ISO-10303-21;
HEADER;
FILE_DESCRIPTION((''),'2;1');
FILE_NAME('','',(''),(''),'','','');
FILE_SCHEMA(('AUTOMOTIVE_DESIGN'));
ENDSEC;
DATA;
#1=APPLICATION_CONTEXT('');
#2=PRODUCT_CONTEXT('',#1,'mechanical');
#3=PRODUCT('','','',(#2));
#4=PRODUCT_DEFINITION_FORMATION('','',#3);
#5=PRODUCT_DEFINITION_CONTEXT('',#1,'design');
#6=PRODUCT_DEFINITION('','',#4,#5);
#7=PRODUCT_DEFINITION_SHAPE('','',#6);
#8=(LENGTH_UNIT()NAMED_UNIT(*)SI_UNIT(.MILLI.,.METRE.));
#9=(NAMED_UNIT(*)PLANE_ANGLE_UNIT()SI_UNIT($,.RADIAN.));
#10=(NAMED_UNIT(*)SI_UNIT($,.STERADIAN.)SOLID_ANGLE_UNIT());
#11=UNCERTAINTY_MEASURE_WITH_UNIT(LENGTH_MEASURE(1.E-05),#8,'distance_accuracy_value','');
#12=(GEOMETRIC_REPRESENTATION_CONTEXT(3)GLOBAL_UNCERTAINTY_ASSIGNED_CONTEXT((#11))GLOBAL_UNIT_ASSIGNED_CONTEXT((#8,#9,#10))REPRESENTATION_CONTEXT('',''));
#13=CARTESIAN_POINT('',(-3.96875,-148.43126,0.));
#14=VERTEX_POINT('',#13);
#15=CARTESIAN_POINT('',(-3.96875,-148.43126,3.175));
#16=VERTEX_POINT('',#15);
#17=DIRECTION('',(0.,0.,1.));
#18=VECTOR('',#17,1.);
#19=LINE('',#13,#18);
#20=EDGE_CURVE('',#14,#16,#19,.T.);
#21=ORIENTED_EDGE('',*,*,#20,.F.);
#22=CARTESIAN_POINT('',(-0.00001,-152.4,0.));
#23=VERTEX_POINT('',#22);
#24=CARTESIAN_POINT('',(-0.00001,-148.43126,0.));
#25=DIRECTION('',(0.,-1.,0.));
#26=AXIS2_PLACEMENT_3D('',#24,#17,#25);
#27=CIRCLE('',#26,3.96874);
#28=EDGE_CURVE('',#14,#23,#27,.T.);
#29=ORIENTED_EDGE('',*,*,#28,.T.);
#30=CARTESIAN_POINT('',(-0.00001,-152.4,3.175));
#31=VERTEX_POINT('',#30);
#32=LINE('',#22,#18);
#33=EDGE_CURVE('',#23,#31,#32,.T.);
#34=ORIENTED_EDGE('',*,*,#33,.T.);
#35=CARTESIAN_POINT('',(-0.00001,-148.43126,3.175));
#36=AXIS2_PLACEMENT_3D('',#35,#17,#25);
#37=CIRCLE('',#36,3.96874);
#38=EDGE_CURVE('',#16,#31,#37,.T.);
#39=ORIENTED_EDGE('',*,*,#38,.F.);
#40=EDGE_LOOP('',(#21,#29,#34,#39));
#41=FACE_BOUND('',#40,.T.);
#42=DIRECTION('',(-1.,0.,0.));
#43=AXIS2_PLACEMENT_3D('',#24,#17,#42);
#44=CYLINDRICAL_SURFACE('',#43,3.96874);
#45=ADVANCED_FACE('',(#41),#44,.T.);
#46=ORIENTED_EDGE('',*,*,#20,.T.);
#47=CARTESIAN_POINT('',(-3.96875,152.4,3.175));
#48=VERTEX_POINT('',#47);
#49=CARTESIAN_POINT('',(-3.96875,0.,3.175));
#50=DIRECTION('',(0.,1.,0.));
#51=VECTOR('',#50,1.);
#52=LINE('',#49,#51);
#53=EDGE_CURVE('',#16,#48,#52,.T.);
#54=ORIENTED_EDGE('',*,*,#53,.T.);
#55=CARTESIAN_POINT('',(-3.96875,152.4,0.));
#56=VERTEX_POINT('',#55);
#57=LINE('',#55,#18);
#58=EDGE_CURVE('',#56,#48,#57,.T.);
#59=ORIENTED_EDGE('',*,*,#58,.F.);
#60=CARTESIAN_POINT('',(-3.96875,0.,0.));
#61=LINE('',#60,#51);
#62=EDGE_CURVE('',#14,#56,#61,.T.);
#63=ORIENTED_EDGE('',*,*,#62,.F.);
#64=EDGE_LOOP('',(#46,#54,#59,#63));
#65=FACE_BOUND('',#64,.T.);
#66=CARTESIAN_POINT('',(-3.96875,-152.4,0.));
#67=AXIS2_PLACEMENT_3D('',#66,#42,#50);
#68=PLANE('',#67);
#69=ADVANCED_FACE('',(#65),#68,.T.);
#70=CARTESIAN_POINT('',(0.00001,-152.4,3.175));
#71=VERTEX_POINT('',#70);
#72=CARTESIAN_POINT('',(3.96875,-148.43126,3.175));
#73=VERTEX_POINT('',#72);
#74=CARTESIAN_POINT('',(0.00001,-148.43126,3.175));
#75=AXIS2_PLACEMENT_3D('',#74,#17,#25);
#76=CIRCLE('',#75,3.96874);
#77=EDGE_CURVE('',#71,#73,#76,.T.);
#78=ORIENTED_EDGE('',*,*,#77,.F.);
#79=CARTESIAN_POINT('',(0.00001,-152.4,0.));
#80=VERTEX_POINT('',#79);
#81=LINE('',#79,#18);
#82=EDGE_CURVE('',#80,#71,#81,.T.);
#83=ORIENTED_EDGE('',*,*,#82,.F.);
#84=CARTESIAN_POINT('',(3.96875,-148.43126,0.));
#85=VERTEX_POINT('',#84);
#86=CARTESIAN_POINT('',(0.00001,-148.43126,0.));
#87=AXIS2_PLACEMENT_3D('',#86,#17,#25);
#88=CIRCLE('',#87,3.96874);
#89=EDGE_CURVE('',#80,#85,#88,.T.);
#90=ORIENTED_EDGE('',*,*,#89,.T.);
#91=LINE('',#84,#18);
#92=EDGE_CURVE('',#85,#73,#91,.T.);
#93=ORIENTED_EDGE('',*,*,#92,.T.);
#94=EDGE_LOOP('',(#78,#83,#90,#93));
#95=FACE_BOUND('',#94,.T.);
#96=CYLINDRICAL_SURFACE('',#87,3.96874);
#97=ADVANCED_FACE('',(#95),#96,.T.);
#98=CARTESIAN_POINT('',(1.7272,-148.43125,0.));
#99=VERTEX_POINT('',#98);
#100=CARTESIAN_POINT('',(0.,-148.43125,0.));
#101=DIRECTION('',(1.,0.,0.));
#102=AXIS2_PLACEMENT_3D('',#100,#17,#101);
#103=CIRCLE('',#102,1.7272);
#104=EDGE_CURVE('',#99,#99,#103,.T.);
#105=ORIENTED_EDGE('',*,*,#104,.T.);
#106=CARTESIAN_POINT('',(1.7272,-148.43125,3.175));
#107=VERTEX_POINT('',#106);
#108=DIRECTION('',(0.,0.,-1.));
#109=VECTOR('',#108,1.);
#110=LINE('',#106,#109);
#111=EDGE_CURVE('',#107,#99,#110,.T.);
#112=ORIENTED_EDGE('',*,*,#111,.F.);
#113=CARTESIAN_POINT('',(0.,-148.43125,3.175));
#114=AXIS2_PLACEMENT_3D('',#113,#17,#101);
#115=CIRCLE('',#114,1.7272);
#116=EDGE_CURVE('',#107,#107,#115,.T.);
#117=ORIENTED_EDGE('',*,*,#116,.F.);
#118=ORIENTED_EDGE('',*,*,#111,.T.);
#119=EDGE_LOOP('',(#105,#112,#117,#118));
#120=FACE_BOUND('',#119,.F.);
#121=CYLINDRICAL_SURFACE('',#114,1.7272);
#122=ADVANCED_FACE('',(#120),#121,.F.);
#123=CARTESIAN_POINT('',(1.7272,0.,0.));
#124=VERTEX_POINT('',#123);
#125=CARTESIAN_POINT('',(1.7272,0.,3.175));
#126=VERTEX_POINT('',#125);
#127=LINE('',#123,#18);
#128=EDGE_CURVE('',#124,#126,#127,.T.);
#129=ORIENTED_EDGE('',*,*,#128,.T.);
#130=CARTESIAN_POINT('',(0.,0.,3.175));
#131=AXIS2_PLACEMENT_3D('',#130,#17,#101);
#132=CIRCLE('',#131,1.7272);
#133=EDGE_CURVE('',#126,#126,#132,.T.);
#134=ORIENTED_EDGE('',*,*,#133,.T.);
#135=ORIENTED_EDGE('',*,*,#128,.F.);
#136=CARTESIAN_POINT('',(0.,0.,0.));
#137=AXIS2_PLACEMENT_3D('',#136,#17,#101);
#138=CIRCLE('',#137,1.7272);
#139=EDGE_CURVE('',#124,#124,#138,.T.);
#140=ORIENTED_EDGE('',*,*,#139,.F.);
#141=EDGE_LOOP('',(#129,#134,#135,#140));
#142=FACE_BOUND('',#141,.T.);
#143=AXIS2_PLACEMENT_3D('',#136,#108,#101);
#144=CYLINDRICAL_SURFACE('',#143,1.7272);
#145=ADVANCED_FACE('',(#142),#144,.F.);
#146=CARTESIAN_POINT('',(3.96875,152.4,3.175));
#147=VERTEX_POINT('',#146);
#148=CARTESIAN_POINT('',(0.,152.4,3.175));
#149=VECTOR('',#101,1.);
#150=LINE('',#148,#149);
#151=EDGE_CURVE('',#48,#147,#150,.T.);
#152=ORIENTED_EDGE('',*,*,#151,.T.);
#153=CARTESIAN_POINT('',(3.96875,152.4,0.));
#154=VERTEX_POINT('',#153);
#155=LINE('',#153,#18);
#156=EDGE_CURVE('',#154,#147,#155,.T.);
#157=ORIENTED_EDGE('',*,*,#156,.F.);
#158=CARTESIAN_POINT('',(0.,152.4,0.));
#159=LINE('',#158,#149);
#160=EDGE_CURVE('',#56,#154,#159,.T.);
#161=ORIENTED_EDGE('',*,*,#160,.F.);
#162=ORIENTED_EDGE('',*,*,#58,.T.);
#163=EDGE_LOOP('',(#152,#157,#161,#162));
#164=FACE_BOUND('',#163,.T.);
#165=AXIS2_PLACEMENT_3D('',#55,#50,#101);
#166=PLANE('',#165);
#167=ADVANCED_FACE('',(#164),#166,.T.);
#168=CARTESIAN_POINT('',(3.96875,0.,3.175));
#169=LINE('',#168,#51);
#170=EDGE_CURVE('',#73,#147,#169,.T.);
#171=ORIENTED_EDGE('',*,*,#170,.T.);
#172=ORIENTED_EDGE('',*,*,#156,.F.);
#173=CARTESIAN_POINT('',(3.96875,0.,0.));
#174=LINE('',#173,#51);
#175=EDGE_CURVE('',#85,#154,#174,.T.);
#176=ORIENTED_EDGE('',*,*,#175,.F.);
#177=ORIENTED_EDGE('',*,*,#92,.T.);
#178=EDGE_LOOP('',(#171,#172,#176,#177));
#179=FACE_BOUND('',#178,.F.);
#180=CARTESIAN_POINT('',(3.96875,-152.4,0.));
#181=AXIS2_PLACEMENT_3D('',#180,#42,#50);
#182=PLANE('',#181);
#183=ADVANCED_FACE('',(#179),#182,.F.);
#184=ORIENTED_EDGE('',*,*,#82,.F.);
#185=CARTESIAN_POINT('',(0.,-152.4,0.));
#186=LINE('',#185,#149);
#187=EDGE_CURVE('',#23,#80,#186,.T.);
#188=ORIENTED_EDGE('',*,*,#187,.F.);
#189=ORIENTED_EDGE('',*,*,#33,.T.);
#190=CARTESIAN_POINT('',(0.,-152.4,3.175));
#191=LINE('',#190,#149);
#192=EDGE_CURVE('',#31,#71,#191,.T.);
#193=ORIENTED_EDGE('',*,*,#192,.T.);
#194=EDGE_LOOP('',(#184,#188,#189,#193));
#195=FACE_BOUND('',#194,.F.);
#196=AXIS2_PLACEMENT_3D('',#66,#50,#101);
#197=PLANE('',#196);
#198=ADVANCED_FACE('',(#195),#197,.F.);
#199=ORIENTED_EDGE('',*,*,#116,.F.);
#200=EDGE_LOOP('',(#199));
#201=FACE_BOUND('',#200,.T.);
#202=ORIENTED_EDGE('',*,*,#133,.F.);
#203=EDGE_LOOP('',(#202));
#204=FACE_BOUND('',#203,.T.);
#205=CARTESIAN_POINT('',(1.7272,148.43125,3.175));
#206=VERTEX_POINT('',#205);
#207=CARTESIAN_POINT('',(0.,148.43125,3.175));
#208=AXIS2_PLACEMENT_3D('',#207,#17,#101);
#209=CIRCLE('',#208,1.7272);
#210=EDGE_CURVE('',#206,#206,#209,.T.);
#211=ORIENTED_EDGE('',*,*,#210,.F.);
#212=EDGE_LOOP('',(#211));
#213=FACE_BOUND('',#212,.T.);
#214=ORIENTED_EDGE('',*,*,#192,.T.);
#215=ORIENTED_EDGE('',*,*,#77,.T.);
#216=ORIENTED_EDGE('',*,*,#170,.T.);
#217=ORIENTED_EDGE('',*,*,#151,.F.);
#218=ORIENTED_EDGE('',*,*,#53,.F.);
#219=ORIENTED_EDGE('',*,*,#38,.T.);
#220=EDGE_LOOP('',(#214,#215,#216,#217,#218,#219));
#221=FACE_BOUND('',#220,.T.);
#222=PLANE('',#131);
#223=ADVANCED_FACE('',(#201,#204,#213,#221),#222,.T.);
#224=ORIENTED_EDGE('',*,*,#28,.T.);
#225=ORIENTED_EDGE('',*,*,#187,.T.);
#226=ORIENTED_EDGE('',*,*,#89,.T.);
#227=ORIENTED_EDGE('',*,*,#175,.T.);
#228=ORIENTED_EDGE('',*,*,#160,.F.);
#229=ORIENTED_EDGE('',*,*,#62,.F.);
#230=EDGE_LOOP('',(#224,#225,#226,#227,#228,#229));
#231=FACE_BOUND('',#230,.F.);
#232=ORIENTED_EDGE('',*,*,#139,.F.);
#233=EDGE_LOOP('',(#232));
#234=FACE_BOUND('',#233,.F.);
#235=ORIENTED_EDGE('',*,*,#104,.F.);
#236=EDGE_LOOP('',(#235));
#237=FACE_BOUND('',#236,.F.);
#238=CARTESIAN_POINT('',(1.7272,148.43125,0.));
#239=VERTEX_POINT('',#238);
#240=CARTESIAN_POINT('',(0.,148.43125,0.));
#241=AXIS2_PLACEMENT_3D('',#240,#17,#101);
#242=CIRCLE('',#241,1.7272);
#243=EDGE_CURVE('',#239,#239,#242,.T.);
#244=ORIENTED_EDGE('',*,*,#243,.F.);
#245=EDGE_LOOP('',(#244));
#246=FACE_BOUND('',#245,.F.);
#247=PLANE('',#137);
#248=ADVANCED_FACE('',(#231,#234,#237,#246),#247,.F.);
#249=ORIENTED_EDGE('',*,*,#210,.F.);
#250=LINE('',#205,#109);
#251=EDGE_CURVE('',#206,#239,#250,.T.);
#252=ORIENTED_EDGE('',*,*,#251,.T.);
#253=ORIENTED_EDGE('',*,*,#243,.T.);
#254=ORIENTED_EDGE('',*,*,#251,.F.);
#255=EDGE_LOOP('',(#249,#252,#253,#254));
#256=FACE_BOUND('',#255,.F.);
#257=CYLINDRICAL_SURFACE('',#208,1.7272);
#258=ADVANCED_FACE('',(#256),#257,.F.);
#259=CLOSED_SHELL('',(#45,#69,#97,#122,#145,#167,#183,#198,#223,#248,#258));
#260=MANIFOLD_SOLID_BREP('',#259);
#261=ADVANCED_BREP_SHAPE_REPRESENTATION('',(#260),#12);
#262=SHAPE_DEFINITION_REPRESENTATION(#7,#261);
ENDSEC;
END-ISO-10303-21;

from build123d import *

# Parameters (mm, degrees)
F0_W     = 7.9375
F0_H     = 304.8
F0_R     = 1.7272
F1_DEPTH = 3.175
F2_R     = 1.7272
F3_DEPTH = 3.175
F4_R     = 3.96874


# Not quite as in the source:
# - a fillet or chamfer is up to 0.001 mm smaller than in the source, because OpenCascade refuses the exact size


with BuildPart() as f1:
    # F0 (on Top) → F1 (new body)
    with BuildSketch(Plane.XY):
        Rectangle(F0_W, F0_H)
        Circle(F0_R, mode=Mode.SUBTRACT)
    extrude(amount=F1_DEPTH)

    # F2 (on face) → F3 (cut, through all)
    with BuildSketch(Plane.XY.offset(3.175)):
        with Locations((0, 148.43125)):
            Circle(F2_R)
        with Locations((0, -148.43125)):
            Circle(F2_R)
    extrude(amount=-F3_DEPTH, mode=Mode.SUBTRACT)

    # F4 (radius 3.96875 in the source; OpenCascade refuses exactly that, so slightly less here)
    f4_edges = [f1.edges().sort_by_distance(p)[0] for p in [
        (-3.96875, -152.4, 1.5875),
        (3.96875, -152.4, 1.5875),
    ]]
    fillet(f4_edges, radius=F4_R)


solid = f1.part
